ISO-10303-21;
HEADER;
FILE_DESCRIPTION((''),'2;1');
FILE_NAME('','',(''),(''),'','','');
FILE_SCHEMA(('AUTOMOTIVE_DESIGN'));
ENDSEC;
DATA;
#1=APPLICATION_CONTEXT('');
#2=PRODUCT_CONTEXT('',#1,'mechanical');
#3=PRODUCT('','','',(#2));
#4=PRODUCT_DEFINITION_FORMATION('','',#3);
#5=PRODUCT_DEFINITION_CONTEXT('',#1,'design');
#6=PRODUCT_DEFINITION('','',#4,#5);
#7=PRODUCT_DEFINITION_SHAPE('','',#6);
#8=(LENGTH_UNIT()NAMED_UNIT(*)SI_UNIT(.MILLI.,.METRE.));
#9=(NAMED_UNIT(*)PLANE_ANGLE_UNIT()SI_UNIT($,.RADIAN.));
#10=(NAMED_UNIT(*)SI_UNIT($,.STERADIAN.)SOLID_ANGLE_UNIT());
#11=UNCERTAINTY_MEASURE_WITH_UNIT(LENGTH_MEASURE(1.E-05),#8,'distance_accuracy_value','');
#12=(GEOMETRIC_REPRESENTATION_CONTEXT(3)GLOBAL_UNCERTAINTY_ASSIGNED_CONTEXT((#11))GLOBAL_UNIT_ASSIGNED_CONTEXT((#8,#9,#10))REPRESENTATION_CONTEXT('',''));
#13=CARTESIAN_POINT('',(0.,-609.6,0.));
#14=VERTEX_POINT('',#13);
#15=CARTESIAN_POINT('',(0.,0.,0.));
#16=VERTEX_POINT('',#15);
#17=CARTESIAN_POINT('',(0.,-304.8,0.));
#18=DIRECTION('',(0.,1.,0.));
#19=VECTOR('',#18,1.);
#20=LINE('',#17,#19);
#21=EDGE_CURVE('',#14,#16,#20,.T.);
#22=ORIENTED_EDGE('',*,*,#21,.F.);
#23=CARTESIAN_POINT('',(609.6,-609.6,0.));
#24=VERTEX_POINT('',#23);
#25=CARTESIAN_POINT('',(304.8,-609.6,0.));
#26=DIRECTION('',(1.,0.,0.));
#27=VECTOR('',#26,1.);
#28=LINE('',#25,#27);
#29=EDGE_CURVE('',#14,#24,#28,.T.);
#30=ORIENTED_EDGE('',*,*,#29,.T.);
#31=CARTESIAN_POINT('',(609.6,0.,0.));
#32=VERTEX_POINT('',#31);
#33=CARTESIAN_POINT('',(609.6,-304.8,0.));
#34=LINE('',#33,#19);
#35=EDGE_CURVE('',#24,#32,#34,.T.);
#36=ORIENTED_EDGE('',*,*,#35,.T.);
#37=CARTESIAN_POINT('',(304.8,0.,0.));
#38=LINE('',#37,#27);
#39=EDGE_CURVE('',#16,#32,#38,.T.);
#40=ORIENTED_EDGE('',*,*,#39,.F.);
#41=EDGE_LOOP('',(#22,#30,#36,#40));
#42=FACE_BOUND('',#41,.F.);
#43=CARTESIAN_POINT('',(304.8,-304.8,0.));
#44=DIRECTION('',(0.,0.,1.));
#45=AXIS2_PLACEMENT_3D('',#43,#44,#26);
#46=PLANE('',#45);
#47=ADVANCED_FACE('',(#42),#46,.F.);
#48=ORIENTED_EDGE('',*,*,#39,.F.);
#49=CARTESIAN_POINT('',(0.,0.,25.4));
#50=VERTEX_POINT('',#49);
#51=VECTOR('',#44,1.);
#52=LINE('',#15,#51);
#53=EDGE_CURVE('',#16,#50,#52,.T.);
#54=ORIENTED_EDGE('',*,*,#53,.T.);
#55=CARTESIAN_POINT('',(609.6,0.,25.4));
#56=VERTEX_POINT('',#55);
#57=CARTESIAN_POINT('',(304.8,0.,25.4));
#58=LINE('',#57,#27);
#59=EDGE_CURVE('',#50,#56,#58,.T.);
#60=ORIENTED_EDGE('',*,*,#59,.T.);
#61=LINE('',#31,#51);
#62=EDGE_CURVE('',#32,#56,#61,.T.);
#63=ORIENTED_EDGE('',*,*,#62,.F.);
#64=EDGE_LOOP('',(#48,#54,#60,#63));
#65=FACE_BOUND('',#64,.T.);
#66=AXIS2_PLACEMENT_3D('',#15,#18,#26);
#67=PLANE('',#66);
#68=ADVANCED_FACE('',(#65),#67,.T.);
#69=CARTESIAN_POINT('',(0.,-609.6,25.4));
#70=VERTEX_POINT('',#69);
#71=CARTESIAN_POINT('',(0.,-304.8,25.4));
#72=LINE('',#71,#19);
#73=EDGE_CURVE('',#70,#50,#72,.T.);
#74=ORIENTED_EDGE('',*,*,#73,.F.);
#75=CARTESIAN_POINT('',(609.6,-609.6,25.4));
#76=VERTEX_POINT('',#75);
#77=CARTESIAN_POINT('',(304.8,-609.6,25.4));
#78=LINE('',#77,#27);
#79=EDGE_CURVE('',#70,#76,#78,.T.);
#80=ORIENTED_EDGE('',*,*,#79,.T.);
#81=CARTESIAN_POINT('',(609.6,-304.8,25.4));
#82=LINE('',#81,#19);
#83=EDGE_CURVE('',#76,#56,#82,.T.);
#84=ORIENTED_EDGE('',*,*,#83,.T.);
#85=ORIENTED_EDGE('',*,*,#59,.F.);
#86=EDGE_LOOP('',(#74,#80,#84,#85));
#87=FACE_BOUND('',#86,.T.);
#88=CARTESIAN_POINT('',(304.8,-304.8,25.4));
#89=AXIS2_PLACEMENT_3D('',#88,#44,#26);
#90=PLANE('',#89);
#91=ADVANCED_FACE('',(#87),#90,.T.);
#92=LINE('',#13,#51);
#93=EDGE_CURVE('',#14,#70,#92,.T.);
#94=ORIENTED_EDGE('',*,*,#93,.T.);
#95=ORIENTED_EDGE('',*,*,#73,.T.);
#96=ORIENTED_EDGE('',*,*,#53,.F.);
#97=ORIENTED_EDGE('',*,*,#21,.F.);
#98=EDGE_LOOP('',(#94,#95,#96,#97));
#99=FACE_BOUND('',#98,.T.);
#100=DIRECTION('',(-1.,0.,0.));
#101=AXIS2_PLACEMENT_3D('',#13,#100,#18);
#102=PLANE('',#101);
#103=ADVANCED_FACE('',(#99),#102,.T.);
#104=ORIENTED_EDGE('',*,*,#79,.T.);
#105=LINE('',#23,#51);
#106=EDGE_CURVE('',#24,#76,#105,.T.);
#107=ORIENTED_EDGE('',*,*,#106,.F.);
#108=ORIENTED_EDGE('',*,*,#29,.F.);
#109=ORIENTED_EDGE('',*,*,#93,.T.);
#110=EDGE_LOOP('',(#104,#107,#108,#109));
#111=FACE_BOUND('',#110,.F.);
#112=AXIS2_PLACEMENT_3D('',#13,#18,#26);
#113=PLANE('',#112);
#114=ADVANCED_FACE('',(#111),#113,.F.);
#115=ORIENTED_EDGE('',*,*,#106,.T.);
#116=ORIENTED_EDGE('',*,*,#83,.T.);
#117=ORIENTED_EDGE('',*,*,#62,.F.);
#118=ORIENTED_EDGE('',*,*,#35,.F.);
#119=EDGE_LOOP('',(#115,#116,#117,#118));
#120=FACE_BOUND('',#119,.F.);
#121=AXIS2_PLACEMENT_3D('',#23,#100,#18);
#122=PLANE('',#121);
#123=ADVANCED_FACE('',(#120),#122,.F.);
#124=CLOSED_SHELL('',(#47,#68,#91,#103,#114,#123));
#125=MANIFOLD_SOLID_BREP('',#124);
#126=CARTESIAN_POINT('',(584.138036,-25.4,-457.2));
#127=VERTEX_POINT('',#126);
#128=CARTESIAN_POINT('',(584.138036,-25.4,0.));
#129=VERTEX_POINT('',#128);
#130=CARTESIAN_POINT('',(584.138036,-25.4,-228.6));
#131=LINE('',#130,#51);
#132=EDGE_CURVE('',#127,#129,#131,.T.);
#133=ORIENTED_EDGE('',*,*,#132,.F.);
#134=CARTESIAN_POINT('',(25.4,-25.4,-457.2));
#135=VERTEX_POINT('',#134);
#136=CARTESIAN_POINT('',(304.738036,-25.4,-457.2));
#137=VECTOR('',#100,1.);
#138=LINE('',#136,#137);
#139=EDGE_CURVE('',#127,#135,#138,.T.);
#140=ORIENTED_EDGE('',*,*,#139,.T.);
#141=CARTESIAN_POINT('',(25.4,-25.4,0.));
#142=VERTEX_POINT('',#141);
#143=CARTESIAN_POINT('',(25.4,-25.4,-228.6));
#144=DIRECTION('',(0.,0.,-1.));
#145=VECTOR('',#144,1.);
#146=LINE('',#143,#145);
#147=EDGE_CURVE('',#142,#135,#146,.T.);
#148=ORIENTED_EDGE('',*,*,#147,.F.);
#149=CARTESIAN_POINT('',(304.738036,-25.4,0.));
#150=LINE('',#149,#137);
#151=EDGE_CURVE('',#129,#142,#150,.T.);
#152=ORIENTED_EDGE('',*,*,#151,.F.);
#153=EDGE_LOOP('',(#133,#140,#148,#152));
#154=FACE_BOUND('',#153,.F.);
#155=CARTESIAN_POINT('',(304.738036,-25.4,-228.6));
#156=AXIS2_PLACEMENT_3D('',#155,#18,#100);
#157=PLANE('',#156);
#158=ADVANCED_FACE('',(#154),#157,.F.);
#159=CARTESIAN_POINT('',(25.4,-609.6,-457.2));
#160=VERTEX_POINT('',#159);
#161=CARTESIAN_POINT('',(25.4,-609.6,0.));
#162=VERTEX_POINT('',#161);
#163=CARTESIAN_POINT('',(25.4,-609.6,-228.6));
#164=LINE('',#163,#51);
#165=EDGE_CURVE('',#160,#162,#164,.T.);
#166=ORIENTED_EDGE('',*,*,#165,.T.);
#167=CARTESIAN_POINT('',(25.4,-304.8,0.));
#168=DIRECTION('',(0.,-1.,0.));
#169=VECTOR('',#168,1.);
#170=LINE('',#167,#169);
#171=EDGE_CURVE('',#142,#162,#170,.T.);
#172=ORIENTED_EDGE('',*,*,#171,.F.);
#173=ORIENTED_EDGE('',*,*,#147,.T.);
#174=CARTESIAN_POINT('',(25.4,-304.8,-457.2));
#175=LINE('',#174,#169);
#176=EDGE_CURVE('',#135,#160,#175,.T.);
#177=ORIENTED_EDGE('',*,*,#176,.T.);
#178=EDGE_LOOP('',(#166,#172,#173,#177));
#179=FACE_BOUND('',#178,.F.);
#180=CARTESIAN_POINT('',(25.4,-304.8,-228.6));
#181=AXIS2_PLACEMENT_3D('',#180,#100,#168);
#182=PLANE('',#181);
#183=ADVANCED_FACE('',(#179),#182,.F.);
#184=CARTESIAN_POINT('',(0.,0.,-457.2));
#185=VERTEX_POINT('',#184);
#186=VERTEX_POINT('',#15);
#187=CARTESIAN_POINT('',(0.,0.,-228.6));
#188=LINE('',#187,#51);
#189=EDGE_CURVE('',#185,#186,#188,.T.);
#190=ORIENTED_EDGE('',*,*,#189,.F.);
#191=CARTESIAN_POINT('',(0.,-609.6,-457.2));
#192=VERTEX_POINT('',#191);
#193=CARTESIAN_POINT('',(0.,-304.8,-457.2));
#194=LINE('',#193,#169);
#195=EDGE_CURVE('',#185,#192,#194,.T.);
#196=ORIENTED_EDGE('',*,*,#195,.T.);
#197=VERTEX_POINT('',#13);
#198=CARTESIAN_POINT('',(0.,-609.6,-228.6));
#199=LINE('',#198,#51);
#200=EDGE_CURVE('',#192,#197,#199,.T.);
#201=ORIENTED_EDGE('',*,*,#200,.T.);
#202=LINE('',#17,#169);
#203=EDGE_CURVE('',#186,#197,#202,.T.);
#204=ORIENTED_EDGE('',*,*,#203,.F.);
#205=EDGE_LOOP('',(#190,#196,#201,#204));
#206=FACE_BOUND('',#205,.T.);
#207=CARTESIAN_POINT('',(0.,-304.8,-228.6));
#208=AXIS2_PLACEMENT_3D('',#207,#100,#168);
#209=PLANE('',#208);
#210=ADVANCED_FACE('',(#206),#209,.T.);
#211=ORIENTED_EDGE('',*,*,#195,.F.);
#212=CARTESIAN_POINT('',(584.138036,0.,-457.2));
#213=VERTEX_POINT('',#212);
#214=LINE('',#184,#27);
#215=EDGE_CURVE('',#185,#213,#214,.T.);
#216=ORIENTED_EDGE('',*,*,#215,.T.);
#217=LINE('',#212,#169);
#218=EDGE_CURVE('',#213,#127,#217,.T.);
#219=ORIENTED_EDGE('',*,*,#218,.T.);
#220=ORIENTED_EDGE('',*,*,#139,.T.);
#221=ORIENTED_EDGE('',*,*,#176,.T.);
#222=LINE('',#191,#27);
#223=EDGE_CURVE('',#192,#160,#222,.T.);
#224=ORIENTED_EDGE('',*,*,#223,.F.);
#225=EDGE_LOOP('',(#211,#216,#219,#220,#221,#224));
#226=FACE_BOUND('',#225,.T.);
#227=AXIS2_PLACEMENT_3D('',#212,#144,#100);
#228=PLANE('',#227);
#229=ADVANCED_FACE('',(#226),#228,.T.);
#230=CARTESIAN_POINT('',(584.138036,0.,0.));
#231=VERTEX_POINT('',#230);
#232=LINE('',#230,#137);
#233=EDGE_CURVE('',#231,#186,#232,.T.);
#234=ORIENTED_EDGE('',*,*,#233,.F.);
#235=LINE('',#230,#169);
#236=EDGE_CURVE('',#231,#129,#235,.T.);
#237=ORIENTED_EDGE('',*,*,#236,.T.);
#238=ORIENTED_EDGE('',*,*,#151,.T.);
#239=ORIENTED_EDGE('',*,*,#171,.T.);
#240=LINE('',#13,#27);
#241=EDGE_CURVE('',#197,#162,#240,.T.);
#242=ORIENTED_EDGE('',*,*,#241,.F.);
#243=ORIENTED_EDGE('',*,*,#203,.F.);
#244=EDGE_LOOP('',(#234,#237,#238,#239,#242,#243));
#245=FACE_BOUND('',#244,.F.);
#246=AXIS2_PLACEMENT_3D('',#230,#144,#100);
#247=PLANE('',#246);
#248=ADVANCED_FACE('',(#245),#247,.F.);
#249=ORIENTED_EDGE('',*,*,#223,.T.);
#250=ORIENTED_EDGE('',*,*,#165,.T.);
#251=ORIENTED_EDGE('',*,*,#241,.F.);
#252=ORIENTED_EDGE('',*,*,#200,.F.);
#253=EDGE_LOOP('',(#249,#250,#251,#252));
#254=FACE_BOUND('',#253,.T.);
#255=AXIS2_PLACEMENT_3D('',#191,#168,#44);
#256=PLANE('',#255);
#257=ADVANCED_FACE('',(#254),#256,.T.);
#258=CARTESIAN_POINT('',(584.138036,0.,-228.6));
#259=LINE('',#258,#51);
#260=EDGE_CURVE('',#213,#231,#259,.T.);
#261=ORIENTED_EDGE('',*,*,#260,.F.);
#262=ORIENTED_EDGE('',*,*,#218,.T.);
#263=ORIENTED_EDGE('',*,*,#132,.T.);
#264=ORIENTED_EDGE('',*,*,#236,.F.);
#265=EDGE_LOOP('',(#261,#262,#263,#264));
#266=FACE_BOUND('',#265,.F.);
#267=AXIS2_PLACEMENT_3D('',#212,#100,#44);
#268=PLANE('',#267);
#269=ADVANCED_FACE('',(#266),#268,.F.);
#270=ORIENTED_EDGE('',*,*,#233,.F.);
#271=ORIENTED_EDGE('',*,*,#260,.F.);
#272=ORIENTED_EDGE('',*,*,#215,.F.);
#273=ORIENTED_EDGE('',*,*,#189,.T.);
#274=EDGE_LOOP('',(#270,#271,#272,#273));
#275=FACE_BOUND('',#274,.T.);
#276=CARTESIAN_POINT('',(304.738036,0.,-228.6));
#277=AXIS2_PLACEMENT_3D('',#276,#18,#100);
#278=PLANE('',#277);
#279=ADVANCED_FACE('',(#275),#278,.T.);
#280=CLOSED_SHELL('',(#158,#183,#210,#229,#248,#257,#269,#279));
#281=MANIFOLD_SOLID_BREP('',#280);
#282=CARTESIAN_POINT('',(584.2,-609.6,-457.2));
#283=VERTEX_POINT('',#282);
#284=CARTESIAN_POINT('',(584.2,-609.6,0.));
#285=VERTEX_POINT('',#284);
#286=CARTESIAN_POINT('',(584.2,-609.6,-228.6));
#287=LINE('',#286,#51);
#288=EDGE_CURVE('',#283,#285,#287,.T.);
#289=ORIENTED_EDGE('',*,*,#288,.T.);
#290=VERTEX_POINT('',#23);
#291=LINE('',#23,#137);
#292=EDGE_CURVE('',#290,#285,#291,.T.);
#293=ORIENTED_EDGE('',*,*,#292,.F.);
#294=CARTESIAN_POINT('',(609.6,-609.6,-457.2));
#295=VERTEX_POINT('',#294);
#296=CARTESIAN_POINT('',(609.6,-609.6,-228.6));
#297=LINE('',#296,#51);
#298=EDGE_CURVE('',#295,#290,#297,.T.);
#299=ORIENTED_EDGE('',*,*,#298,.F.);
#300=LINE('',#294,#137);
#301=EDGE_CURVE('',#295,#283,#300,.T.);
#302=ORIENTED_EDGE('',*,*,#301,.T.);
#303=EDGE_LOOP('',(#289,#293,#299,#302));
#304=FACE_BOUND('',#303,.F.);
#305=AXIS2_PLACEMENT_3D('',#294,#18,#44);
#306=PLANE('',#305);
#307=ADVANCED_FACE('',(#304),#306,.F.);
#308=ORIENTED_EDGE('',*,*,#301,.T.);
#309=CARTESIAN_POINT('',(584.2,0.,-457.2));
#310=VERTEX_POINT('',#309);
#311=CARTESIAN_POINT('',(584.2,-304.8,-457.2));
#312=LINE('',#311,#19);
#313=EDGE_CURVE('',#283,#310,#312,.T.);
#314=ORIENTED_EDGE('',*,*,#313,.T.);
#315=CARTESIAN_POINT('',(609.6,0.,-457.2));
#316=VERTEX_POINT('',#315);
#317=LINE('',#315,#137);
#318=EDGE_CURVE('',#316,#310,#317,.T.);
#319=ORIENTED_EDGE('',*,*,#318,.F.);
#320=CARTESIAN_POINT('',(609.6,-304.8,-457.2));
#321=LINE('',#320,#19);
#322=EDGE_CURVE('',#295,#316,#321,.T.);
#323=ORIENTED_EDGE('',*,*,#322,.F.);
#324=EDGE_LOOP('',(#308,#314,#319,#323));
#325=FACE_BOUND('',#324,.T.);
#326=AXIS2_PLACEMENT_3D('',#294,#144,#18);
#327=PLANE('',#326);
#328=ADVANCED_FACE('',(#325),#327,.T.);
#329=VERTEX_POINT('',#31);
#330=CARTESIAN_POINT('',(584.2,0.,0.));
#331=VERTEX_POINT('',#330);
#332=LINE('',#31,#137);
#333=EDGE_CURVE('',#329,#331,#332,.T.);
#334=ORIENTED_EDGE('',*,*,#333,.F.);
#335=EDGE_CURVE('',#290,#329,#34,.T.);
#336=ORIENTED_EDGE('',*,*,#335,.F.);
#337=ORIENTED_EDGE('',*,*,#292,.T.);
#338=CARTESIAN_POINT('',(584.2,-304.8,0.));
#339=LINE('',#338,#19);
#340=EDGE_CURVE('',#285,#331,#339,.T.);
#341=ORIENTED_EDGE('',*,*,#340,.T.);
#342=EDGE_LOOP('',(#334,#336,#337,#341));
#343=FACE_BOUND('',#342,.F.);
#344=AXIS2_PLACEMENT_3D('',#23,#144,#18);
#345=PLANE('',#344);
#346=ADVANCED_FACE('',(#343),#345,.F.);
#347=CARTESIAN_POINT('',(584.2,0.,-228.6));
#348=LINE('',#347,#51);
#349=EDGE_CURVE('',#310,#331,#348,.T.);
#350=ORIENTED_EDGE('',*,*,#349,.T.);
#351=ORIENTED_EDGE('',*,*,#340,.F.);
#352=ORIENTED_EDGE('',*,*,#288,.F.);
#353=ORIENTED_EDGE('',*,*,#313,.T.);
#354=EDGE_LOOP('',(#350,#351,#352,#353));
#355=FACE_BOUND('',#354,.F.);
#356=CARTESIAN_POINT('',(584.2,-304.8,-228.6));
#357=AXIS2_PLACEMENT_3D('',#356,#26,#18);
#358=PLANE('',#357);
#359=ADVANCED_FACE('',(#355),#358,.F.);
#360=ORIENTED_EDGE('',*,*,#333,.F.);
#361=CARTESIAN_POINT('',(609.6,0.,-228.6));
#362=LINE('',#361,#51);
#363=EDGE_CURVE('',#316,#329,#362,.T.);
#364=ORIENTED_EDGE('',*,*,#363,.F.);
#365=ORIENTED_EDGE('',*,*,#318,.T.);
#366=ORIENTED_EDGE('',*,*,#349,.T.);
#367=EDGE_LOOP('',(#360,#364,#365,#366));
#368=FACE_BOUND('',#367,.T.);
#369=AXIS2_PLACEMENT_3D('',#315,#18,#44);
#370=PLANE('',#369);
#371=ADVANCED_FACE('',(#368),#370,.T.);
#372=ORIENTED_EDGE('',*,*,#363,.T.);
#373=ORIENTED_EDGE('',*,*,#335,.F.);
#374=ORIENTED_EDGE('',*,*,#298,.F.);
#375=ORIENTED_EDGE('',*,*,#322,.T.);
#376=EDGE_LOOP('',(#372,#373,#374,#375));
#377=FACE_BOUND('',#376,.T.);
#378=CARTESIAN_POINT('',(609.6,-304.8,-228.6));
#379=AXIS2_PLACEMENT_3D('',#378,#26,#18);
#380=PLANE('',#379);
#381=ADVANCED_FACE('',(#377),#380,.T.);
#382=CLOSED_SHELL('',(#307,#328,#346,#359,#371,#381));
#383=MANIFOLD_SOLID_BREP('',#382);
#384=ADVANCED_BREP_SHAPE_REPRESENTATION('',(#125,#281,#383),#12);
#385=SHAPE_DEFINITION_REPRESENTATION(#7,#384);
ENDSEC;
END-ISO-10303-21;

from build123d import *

# Parameters (mm, degrees)
F0_W     = 609.6
F0_H     = 609.6
F1_DEPTH = 25.4
F2_W     = 609.6
F2_H     = 457.2
F3_DEPTH = 25.4
F4_W     = 609.6
F4_H     = 457.2
F5_DEPTH = 25.4
F6_W     = 558.8
F6_H     = 457.2
F7_DEPTH = 25.4


with BuildPart() as f1:
    # F0 (on Top) → F1 (new body)
    with BuildSketch(Plane.XY):
        with Locations((304.8, -304.8)):
            Rectangle(F0_W, F0_H)
    extrude(amount=F1_DEPTH)


with BuildPart() as f3:
    # F2 (on face) → F3 (new body)
    with BuildSketch(Plane.YZ.offset(609.6)):
        with Locations((-304.8, -228.6)):
            Rectangle(F2_W, F2_H)
    extrude(amount=-F3_DEPTH)


with BuildPart() as f5:
    # F4 (on face) → F5 (new body)
    with BuildSketch(Plane(origin=(0, 0, 0), x_dir=(0, -1, 0), z_dir=(-1, 0, 0))):
        with Locations((304.8, -228.6)):
            Rectangle(F4_W, F4_H)
    extrude(amount=-F5_DEPTH)

    # F6 (on face) → F7 (join)
    with BuildSketch(Plane(origin=(0, 0, 0), x_dir=(-1, 0, 0), z_dir=(0, 1, 0))):
        with Locations((-304.7380357742, -228.6)):
            Rectangle(F6_W, F6_H)
    extrude(amount=-F7_DEPTH)


solid = Compound([f1.part, f3.part, f5.part])
